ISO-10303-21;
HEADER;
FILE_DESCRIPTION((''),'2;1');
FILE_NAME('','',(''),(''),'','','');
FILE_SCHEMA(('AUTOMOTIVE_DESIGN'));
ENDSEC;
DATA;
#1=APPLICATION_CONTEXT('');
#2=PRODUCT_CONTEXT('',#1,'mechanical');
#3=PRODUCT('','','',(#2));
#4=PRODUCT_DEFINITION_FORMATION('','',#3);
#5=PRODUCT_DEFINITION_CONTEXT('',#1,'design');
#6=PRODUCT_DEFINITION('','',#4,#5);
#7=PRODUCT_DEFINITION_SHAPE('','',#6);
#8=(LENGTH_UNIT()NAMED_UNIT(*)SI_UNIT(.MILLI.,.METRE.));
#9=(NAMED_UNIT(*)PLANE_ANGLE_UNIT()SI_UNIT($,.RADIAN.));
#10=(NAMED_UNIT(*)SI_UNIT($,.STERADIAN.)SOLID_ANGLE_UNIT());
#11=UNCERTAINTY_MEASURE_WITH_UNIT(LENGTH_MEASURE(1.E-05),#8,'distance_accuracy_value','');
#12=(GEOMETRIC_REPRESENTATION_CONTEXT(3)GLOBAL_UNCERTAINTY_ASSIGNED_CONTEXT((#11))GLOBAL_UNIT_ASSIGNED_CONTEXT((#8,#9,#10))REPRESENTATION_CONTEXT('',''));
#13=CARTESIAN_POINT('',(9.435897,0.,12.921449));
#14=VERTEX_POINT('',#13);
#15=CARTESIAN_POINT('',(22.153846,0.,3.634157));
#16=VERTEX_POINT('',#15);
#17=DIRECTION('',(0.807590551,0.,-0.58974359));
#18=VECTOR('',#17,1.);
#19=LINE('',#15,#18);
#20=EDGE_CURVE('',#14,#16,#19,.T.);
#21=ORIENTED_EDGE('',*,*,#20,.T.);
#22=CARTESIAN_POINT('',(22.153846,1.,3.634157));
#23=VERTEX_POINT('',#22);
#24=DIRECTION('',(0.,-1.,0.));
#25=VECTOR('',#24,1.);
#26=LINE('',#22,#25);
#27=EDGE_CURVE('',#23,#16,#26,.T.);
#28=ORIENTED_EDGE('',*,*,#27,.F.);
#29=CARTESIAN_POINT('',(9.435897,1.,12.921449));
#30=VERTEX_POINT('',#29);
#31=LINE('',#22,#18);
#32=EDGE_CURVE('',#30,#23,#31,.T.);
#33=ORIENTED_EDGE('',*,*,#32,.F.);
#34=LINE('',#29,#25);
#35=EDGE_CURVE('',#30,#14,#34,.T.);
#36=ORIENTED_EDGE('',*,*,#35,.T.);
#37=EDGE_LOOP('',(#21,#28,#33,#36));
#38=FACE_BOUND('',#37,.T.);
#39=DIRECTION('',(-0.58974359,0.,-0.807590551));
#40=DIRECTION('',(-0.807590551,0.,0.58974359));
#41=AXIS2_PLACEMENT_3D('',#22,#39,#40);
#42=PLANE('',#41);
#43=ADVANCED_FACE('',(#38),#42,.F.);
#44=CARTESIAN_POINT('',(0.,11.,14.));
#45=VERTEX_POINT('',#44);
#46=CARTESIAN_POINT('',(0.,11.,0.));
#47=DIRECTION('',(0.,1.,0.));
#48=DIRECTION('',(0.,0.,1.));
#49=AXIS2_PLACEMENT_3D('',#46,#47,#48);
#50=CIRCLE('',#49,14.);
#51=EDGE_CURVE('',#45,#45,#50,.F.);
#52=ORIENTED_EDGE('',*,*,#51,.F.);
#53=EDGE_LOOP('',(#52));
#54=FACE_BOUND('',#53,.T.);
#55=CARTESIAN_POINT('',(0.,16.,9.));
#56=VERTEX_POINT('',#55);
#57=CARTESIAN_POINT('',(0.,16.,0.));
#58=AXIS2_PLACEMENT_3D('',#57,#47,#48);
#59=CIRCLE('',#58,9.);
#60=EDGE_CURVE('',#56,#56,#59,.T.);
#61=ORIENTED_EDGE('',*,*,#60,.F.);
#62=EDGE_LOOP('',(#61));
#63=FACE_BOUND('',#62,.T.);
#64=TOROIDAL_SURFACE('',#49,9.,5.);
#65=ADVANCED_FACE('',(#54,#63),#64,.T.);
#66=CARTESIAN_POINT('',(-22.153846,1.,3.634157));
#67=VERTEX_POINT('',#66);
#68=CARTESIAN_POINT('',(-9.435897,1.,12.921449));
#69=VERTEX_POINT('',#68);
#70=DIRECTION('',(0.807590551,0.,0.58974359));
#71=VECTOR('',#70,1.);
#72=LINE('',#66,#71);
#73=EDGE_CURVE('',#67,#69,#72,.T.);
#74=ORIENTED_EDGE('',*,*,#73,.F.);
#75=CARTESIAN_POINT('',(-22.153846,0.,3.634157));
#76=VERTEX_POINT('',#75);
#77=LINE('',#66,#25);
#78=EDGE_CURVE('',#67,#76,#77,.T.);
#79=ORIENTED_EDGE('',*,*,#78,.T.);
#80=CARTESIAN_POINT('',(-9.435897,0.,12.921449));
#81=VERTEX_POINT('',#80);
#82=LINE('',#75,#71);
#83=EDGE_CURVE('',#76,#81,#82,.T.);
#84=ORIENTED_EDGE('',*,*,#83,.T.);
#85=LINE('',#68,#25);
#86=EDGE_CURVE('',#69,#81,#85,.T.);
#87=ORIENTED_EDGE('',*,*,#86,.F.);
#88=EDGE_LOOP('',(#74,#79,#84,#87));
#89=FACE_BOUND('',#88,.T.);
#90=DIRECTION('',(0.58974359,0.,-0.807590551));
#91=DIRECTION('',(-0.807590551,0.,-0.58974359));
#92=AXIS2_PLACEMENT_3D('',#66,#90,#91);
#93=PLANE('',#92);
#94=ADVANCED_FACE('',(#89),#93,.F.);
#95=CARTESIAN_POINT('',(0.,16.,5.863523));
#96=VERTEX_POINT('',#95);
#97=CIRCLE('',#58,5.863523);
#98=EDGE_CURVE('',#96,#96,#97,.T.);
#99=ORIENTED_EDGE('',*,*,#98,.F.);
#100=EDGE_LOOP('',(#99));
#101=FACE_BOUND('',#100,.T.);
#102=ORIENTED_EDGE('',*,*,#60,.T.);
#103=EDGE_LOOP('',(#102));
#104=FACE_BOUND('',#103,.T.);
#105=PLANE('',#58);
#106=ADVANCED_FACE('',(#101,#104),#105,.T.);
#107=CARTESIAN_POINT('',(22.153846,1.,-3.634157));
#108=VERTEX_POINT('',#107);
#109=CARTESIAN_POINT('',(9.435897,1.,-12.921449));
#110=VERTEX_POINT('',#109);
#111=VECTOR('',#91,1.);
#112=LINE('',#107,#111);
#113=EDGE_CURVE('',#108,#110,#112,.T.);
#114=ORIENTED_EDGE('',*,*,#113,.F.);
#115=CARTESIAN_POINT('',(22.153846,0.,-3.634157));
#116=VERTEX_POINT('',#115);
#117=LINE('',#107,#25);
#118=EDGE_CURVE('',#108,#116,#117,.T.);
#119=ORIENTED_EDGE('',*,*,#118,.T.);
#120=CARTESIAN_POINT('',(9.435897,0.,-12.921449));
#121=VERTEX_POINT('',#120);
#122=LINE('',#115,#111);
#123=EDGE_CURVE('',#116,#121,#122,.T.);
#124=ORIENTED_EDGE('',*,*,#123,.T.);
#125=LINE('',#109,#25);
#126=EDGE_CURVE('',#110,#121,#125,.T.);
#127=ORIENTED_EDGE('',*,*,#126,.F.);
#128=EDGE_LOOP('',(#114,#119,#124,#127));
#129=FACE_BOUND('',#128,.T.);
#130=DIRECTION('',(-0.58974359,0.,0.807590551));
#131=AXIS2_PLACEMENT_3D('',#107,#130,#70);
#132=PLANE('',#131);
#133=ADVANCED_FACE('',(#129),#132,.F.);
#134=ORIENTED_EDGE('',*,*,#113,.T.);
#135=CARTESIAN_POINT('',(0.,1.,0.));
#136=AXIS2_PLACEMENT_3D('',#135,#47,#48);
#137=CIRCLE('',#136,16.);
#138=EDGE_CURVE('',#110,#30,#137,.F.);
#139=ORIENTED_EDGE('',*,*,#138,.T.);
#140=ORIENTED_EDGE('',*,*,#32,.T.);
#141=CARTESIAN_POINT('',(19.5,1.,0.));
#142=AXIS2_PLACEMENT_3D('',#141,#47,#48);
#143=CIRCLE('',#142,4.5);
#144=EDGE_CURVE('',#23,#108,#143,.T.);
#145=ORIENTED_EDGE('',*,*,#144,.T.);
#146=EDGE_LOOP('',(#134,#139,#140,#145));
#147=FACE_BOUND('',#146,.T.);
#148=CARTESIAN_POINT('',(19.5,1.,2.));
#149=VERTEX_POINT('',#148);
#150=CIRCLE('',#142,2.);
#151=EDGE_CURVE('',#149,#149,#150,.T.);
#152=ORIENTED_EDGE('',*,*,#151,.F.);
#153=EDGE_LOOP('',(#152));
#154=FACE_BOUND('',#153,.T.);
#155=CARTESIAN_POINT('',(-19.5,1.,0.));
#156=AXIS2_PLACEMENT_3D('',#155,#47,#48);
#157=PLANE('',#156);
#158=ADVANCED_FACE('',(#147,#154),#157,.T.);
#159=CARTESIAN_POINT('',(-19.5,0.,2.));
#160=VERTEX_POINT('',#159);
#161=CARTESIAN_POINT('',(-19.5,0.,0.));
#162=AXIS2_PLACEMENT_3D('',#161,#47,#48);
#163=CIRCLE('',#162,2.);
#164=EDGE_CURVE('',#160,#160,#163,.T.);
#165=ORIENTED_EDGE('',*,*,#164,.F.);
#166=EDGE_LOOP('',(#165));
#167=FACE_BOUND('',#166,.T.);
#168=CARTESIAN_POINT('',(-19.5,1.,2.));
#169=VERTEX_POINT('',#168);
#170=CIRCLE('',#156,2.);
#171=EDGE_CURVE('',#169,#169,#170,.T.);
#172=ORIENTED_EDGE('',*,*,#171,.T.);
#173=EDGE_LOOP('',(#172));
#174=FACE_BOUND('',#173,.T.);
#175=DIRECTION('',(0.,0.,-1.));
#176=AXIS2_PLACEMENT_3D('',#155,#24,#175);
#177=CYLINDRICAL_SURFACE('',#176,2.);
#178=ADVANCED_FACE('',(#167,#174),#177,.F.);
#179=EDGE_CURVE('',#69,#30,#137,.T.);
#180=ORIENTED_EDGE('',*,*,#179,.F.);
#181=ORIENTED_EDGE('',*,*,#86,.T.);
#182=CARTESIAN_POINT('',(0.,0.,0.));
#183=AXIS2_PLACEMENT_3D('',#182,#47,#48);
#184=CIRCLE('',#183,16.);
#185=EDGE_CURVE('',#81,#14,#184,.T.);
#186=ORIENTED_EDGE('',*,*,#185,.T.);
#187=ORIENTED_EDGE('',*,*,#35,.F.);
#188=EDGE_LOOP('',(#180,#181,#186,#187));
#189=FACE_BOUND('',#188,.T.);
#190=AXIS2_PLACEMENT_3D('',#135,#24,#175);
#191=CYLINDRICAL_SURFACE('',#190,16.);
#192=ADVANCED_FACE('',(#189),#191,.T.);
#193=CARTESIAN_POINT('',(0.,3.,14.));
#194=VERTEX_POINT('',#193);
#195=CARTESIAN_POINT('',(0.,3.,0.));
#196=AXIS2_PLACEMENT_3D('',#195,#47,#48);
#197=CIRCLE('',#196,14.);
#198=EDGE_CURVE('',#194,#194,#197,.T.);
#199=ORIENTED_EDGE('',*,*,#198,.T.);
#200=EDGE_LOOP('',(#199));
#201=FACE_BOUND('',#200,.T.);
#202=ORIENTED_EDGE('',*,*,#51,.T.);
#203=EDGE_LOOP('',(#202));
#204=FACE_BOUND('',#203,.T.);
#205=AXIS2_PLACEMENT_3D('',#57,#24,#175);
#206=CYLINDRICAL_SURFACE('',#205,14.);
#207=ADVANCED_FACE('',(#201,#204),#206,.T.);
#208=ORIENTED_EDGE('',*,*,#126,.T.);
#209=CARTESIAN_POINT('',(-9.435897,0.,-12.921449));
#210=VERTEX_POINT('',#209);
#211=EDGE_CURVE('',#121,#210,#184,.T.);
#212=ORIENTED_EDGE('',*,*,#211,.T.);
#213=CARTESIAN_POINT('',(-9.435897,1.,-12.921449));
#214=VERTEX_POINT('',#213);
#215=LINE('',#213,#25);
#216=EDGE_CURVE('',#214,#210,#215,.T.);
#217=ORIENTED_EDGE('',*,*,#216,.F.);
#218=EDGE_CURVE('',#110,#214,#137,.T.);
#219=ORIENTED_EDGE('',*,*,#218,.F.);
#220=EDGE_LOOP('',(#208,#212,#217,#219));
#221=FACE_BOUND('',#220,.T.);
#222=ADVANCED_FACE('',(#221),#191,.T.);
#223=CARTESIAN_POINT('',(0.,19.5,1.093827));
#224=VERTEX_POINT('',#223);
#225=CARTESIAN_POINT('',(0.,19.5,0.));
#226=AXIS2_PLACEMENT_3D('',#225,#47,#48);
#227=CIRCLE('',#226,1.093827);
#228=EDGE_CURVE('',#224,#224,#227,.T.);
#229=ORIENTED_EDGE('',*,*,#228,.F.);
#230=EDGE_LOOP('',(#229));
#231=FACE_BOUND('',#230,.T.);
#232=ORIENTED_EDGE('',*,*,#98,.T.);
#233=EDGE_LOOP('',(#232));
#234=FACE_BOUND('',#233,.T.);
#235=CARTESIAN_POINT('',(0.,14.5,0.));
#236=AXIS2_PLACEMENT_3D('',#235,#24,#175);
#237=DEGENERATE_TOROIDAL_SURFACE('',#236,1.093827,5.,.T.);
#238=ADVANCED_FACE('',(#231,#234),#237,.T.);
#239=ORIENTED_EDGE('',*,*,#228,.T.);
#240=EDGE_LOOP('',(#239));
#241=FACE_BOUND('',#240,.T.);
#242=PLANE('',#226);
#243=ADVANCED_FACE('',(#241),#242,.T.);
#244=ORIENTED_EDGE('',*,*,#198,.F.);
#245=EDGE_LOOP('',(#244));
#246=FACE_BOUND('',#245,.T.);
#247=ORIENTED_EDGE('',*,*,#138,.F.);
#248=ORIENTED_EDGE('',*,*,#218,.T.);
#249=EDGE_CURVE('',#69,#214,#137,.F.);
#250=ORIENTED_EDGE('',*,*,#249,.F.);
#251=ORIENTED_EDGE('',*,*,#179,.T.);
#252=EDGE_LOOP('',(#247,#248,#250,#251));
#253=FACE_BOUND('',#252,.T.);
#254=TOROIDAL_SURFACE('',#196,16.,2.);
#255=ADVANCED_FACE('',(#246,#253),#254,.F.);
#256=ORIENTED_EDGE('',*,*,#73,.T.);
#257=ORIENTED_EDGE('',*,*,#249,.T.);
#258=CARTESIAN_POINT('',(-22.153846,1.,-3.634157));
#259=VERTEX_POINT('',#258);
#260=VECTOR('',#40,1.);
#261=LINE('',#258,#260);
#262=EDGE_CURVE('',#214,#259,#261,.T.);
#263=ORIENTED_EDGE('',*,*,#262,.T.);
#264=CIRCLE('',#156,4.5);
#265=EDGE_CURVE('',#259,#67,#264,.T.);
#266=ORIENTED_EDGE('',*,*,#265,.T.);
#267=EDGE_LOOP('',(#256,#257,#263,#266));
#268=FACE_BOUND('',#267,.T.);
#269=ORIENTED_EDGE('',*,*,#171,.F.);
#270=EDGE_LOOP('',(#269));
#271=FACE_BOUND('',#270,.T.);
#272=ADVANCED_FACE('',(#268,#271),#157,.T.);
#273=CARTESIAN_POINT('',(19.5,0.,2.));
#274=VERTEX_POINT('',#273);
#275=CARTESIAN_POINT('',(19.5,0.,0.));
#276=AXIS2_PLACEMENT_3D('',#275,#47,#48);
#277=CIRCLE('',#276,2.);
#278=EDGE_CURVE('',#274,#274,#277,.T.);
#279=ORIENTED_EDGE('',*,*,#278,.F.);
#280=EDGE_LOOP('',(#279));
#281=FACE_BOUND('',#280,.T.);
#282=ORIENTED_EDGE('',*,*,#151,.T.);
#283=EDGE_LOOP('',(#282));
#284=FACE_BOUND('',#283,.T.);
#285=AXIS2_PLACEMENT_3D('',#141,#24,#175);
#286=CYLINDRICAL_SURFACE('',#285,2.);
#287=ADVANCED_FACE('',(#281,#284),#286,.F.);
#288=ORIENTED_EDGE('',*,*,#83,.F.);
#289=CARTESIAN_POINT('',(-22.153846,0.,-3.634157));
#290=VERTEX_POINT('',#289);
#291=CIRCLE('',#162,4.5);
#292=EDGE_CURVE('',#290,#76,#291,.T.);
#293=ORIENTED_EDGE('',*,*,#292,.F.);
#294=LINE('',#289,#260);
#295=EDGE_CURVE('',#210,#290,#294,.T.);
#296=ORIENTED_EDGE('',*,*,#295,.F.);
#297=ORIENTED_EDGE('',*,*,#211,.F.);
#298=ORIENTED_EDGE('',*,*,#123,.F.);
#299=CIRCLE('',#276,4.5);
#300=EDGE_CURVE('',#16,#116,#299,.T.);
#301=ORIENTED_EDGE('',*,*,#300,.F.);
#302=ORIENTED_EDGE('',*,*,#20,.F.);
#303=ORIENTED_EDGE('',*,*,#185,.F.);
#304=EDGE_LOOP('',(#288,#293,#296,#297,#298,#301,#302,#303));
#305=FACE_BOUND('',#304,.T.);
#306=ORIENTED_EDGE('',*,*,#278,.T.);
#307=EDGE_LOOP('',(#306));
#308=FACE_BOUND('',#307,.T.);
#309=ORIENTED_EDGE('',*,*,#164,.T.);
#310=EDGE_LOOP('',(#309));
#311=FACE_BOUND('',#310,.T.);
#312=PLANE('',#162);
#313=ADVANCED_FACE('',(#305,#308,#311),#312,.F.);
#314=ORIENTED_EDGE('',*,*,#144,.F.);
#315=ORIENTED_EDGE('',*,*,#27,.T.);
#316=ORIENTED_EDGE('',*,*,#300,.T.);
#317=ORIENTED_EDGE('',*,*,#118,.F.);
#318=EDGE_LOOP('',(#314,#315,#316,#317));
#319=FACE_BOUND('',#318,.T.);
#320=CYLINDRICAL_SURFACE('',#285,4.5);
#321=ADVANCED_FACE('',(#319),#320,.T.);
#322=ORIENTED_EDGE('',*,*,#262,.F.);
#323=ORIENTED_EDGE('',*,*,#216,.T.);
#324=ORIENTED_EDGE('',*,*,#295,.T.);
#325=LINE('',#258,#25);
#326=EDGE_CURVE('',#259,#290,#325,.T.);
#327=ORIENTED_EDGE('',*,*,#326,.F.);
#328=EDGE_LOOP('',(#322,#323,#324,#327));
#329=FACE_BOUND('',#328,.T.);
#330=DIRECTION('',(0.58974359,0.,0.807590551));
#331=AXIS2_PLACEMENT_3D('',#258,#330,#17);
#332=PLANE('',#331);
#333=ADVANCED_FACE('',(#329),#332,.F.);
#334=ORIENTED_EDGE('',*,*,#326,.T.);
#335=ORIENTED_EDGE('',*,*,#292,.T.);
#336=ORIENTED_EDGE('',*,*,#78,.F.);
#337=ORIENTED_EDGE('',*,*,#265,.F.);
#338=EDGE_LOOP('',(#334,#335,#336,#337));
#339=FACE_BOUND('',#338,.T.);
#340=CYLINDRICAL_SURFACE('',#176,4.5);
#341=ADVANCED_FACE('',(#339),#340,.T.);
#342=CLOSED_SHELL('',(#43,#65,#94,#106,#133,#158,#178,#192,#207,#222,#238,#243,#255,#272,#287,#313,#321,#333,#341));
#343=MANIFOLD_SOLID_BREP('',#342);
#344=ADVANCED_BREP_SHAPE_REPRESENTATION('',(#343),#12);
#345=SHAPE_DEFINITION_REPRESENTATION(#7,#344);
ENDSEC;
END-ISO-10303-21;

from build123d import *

# Parameters (mm, degrees)
SKETCH1_R           = 2
BOSS_EXTRUDE1_DEPTH = 1
SKETCH2_R           = 14
BOSS_EXTRUDE2_DEPTH = 15
FILLET1_R           = 5
SKETCH3_R           = 5.863522808
BOSS_EXTRUDE3_DEPTH = 3.5
FILLET2_R           = 5
FILLET3_R           = 2


# Some blends are built 0.0001 mm under size
with BuildPart() as part:
    # Sketch1 → Boss-Extrude1 (new body)
    with BuildSketch(Plane(origin=(0, 0, 0), x_dir=(1, 0, 0), z_dir=(0, 1, 0))):
        with BuildLine():
            Line((-22.153846154, 3.63415748), (-9.435897436, 12.921448819))
            ThreePointArc((-9.435897436, 12.921448819), (0, 16), (9.435897436, 12.921448819))
            Line((9.435897436, 12.921448819), (22.153846154, 3.63415748))
            ThreePointArc((22.153846154, 3.63415748), (24, 0), (22.153846154, -3.63415748))
            Line((22.153846154, -3.63415748), (9.435897436, -12.921448819))
            ThreePointArc((9.435897436, -12.921448819), (0, -16), (-9.435897436, -12.921448819))
            Line((-9.435897436, -12.921448819), (-22.153846154, -3.63415748))
            ThreePointArc((-22.153846154, -3.63415748), (-24, 0), (-22.153846154, 3.63415748))
        make_face()
        with Locations(Location((19.5, 0, 0), (0, 0, 270))):
            Circle(SKETCH1_R, mode=Mode.SUBTRACT)
        with Locations(Location((-19.5, 0, 0), (0, 0, 270))):
            Circle(SKETCH1_R, mode=Mode.SUBTRACT)
    extrude(amount=BOSS_EXTRUDE1_DEPTH)

    # Sketch2 → Boss-Extrude2 (add)
    with BuildSketch(Plane(origin=(0, 1, 0), x_dir=(1, 0, 0), z_dir=(0, 1, 0))):
        with Locations(Location((0, 0, 0), (0, 0, 270))):
            Circle(SKETCH2_R)
    extrude(amount=BOSS_EXTRUDE2_DEPTH)

    # Fillet1
    fillet1_edges = [part.edges().sort_by_distance(p)[0] for p in [
        (0, 16, -14),
    ]]
    fillet(fillet1_edges, radius=FILLET1_R)

    # Sketch3 → Boss-Extrude3 (add)
    with BuildSketch(Plane(origin=(0, 16, 0), x_dir=(1, 0, 0), z_dir=(0, 1, 0))):
        with Locations(Location((0, 0, 0), (0, 0, 270))):
            Circle(SKETCH3_R)
    extrude(amount=BOSS_EXTRUDE3_DEPTH)

    # Fillet2
    # the kernel refuses this fillet: 5 mm, written as the material it takes off along each edge
    with BuildSketch(Plane(origin=(0, 19.5, 0), x_dir=(0, 0, 1), z_dir=(-1, 0, 0))) as fillet2_piece_1:
        with BuildLine():
            CenterArc((1.093826801, -5), FILLET2_R, 17.457603124, 72.542396876)
            Line((1.093826801, 0), (1.093826801, 0.1))
            Line((1.093826801, 0.1), (5.863522808, 0.1))
            Line((5.863522808, 0.1), (5.963522808, 0))
            ThreePointArc((5.963522808, 0), (5.963522808, -1.75), (5.958916728, -3.47))
            Line((5.958916728, -3.47), (5.863522808, -3.5))
        make_face()
    revolve(axis=Axis((0, 19.5, 0), (0, 1, 0)), mode=Mode.SUBTRACT)

    # Fillet3
    fillet3_edges = [part.edges().sort_by_distance(p)[0] for p in [
        (0, 1, -14),
    ]]
    fillet(fillet3_edges, radius=FILLET3_R - 0.0001)  # a hair under: the kernel refuses the full size


solid = part.part
